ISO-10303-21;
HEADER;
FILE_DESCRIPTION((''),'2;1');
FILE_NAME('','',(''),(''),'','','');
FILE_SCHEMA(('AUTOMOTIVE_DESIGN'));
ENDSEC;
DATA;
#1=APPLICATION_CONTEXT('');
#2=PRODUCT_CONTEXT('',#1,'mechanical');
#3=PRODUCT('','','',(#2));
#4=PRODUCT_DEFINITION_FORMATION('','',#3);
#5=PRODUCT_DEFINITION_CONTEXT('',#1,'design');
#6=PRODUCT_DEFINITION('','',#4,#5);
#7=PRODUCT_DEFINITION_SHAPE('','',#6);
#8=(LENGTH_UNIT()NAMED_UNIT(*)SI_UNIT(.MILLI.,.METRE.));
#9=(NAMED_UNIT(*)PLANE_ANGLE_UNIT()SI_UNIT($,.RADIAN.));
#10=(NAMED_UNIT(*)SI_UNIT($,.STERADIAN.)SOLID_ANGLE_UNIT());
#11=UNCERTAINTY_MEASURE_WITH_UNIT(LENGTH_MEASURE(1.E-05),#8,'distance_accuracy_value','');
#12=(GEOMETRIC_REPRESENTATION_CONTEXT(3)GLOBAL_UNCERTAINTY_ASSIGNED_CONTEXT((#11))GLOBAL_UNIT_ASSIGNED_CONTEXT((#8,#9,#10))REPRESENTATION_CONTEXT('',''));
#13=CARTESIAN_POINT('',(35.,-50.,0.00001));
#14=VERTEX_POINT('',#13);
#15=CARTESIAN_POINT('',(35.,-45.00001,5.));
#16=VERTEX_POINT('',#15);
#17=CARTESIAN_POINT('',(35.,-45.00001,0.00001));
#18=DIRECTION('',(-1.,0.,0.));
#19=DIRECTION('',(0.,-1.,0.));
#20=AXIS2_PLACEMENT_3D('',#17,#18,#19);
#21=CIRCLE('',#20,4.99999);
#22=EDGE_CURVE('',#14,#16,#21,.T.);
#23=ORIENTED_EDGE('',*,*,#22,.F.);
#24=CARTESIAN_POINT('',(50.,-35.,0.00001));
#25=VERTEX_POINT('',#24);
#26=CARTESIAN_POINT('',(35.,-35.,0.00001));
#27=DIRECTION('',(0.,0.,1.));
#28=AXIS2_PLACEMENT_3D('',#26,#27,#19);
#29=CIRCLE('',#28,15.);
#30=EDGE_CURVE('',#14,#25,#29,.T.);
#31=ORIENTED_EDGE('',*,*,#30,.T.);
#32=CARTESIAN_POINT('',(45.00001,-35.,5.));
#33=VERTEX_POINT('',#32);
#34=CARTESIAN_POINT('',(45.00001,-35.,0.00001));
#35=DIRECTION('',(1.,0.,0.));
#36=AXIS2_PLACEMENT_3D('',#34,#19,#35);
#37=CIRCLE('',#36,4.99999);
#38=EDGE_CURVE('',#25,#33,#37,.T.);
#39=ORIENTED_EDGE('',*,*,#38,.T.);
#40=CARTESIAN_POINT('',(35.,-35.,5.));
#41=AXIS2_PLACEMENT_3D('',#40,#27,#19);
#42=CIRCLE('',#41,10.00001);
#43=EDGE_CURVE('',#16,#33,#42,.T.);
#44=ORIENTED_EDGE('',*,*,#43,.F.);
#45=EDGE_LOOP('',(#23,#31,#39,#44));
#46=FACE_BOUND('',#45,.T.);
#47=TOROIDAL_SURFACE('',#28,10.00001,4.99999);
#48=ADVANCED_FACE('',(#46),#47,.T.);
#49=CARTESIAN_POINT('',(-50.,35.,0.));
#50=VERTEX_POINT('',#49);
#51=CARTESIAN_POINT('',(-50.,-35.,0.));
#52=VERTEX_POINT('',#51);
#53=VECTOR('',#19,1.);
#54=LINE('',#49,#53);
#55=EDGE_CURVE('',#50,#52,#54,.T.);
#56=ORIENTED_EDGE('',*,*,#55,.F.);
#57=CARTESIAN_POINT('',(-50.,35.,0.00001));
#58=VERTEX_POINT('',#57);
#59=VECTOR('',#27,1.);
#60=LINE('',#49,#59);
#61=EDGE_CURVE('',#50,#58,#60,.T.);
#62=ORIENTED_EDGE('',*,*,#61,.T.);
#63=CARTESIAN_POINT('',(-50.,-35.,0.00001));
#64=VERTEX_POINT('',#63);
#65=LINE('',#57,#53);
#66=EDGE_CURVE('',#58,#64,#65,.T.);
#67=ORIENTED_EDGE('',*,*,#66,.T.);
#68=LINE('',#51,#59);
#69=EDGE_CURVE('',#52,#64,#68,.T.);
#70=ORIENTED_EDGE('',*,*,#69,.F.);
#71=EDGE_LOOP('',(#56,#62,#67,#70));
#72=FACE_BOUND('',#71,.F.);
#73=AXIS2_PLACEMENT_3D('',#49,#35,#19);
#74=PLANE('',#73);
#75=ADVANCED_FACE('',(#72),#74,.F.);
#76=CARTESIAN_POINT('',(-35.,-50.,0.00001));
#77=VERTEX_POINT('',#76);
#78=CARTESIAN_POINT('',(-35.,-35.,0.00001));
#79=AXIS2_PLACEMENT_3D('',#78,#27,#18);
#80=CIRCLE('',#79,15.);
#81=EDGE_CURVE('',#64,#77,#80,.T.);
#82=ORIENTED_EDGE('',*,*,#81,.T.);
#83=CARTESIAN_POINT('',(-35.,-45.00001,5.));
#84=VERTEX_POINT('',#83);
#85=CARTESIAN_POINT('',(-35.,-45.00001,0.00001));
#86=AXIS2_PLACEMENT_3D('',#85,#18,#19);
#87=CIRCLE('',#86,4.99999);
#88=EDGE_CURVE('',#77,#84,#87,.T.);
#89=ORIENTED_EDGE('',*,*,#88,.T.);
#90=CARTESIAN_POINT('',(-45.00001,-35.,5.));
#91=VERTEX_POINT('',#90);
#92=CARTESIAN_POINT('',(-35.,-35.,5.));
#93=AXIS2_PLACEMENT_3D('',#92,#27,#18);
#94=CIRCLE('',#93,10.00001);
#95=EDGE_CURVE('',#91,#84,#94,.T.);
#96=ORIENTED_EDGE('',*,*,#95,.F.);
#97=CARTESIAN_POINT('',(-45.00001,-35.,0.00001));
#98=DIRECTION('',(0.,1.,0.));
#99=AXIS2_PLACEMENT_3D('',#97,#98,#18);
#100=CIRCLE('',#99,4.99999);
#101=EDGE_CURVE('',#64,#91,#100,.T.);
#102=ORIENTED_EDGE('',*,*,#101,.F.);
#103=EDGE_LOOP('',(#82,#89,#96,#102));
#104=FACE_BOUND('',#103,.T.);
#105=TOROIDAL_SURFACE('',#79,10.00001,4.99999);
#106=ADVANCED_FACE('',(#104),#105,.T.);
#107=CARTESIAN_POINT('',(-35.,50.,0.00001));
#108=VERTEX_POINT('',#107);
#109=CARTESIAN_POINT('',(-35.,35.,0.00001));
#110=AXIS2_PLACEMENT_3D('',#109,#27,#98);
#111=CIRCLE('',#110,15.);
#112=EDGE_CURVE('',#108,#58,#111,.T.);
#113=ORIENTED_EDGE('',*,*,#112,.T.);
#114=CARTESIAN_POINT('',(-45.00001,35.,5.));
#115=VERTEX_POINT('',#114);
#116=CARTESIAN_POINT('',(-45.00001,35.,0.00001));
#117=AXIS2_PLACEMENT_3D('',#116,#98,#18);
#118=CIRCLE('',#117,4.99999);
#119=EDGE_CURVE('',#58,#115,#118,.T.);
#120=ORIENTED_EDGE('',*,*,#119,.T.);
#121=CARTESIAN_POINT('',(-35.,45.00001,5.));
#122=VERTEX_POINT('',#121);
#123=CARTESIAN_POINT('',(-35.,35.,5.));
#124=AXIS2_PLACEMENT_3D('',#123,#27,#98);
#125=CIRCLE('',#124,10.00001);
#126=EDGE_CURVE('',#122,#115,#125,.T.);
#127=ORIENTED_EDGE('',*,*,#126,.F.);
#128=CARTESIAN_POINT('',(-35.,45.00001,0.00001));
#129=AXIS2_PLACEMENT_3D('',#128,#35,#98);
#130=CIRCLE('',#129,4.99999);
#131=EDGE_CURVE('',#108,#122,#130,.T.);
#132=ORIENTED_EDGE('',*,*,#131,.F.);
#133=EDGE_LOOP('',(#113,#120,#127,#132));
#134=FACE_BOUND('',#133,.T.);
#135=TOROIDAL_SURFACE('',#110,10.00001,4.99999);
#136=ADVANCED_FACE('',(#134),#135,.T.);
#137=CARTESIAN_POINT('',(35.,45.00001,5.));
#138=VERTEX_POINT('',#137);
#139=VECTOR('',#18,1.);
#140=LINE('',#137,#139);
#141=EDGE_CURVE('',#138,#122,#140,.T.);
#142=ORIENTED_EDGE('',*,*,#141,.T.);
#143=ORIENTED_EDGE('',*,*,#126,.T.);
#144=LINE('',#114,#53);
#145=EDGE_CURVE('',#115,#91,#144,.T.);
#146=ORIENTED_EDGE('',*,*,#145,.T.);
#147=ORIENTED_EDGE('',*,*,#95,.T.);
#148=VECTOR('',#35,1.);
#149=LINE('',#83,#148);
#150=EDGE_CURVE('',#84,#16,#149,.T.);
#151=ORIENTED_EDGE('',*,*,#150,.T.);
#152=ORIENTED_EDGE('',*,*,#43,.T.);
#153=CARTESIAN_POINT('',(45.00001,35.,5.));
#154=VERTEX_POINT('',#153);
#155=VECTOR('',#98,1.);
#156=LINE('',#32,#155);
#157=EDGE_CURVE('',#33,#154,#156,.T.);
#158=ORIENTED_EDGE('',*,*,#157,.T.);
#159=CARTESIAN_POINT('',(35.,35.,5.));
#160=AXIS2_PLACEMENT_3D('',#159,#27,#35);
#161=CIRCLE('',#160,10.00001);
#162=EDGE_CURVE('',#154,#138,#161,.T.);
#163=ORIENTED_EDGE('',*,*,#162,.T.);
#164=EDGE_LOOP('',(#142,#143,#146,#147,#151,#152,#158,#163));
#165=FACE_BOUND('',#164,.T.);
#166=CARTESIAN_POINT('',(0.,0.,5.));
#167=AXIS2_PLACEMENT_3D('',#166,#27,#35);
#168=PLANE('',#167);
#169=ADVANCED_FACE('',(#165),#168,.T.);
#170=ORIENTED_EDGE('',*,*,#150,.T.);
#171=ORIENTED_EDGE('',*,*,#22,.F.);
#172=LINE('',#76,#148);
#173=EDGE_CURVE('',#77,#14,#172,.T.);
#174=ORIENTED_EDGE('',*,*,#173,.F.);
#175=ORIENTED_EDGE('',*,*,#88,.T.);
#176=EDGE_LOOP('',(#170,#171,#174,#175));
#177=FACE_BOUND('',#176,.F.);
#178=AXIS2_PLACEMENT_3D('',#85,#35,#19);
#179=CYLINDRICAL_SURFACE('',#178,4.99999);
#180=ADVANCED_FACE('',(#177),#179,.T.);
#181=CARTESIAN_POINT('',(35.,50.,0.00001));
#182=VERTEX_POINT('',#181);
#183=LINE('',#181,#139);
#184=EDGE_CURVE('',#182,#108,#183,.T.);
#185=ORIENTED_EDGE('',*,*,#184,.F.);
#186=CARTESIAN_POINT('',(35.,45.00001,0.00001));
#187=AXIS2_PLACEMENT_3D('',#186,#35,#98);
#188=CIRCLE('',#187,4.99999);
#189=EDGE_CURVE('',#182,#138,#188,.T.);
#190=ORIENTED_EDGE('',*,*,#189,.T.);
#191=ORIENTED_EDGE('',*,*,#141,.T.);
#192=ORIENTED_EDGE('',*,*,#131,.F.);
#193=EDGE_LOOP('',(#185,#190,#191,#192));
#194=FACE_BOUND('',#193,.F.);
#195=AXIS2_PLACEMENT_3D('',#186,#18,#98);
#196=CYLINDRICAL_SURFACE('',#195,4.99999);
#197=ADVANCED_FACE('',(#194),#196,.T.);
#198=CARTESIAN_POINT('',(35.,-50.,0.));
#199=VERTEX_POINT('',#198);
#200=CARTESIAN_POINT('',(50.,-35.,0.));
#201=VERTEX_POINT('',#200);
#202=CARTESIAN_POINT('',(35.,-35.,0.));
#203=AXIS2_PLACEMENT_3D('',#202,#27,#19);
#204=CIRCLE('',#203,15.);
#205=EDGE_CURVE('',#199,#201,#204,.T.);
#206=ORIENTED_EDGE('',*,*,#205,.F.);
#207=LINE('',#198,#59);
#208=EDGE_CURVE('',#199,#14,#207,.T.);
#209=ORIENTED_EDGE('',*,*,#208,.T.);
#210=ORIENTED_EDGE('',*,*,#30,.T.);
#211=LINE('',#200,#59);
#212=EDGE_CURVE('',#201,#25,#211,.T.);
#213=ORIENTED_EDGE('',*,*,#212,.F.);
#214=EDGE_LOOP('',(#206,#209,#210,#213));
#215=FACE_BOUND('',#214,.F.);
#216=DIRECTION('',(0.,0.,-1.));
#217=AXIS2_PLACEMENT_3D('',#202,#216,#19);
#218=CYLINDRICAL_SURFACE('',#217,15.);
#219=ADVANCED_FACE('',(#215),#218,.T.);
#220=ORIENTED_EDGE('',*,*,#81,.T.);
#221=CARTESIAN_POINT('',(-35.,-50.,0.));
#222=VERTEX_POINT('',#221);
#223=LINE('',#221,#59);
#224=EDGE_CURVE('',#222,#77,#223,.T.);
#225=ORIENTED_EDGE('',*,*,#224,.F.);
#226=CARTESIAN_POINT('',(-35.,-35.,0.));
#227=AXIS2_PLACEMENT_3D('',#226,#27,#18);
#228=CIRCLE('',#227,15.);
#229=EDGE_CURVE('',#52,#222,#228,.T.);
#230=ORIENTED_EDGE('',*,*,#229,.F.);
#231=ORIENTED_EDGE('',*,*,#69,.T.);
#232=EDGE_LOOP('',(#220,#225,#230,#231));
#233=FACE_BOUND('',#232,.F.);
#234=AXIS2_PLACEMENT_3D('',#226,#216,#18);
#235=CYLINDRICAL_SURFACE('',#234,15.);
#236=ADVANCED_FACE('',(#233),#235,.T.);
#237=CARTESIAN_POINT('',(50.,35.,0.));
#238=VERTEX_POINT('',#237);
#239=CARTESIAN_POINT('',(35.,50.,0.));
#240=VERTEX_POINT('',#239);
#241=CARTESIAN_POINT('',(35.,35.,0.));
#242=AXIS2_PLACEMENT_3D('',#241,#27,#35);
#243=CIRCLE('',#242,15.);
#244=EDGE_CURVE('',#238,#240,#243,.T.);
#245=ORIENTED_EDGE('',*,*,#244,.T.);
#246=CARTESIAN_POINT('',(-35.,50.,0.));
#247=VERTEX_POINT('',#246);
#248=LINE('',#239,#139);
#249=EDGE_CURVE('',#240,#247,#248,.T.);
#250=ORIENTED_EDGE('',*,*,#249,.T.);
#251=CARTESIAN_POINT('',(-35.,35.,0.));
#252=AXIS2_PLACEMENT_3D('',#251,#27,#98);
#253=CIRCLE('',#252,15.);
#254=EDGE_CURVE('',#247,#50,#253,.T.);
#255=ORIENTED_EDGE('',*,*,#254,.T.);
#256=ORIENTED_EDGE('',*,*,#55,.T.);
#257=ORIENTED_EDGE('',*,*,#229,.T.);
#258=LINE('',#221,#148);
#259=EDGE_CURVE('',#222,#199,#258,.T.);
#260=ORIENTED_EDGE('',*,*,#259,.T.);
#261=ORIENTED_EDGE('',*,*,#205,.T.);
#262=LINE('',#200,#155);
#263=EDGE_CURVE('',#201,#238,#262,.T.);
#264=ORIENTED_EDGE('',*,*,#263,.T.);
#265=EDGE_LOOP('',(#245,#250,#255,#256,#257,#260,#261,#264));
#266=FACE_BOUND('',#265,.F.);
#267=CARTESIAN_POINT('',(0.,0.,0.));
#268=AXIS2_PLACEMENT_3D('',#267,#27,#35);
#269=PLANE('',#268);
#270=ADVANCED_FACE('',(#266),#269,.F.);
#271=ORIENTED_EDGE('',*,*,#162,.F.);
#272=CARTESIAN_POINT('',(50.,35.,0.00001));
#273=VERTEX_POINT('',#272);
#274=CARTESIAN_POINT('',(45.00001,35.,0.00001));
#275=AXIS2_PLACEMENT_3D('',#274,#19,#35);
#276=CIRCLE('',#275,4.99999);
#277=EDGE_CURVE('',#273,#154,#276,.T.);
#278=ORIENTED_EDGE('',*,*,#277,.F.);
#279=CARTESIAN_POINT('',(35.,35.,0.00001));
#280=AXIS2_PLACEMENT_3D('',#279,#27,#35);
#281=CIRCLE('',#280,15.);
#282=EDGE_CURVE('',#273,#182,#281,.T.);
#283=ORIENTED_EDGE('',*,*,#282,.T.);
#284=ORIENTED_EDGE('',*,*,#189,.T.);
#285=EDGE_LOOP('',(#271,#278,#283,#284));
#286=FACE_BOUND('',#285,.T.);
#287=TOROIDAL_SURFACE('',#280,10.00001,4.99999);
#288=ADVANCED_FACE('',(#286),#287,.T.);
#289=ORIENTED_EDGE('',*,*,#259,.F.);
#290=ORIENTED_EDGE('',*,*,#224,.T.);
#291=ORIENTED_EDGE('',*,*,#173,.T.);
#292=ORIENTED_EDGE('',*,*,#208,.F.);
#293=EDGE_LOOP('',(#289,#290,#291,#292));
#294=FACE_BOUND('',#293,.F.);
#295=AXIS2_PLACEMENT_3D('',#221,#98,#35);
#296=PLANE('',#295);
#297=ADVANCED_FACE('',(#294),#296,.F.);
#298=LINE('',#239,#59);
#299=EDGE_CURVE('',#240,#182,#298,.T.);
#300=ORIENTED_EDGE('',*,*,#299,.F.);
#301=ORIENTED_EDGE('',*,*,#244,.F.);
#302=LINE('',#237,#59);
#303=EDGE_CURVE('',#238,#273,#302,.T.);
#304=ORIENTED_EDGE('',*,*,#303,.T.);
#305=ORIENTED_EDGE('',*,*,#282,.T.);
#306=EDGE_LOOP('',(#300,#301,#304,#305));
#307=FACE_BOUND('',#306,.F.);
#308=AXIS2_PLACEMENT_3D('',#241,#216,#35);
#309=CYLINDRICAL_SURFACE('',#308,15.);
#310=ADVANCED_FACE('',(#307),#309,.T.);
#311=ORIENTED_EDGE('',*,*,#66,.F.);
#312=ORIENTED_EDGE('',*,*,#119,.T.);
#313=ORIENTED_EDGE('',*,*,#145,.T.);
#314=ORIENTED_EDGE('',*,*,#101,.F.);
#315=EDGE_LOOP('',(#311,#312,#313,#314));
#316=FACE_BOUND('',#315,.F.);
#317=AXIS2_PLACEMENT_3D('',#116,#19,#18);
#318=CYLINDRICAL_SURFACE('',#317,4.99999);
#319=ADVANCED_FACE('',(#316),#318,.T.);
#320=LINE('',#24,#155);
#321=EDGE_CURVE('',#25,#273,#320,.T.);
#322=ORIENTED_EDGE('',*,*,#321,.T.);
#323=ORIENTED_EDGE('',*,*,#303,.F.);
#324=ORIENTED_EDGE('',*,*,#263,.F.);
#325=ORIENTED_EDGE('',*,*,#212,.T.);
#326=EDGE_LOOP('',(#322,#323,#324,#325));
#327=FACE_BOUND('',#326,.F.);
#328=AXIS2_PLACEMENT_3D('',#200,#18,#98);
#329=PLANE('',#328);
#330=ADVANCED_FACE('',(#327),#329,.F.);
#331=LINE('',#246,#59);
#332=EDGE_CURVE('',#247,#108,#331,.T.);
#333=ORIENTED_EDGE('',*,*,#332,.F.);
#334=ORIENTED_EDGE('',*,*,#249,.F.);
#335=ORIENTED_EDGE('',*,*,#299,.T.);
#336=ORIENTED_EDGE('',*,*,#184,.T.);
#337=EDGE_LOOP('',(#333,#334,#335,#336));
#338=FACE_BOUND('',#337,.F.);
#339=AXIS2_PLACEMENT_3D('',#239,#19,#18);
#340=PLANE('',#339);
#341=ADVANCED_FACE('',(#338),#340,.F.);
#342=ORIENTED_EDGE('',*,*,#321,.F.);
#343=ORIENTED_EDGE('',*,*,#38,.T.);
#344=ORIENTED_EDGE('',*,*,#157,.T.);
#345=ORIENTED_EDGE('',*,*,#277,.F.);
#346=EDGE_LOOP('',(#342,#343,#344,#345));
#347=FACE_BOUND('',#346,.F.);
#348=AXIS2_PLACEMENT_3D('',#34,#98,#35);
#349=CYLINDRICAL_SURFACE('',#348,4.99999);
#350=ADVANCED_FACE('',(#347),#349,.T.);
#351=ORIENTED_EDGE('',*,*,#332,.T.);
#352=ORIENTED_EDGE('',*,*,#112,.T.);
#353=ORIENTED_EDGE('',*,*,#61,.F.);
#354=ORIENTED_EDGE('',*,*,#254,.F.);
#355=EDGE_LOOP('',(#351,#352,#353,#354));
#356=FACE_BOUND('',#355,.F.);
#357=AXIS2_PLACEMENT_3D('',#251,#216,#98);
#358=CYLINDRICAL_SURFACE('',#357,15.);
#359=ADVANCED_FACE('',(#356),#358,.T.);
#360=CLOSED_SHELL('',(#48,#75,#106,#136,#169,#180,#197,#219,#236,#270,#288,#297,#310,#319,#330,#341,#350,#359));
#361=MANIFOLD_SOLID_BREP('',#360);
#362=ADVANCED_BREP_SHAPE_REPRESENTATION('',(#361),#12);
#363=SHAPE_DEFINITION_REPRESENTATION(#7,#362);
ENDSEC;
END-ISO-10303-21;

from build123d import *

# Parameters (mm, degrees)
F1_DEPTH = 5
F2_R     = 4.99999


# Not quite as in the source:
# - a fillet or chamfer is up to 0.001 mm smaller than in the source, because OpenCascade refuses the exact size


with BuildPart() as f1:
    # F0 (on Top) → F1 (new body)
    with BuildSketch(Plane.XY):
        with BuildLine():
            Line((35, 50), (-35, 50))
            ThreePointArc((-35, 50), (-45.6066017178, 45.6066017178), (-50, 35))
            Line((-50, 35), (-50, -35))
            ThreePointArc((-50, -35), (-45.6066017178, -45.6066017178), (-35, -50))
            Line((-35, -50), (35, -50))
            ThreePointArc((35, -50), (45.6066017178, -45.6066017178), (50, -35))
            Line((50, -35), (50, 35))
            ThreePointArc((50, 35), (45.6066017178, 45.6066017178), (35, 50))
        make_face()
    extrude(amount=F1_DEPTH)

    # F2 (radius 5 in the source; OpenCascade refuses exactly that, so slightly less here)
    f2_edges = [f1.edges().sort_by_distance(p)[0] for p in [
        (0, 50, 5),
        (-45.606602, 45.606602, 5),
        (-50, 0, 5),
        (-45.606602, -45.606602, 5),
        (0, -50, 5),
        (45.606602, -45.606602, 5),
        (50, 0, 5),
        (45.606602, 45.606602, 5),
    ]]
    fillet(f2_edges, radius=F2_R)


solid = f1.part
